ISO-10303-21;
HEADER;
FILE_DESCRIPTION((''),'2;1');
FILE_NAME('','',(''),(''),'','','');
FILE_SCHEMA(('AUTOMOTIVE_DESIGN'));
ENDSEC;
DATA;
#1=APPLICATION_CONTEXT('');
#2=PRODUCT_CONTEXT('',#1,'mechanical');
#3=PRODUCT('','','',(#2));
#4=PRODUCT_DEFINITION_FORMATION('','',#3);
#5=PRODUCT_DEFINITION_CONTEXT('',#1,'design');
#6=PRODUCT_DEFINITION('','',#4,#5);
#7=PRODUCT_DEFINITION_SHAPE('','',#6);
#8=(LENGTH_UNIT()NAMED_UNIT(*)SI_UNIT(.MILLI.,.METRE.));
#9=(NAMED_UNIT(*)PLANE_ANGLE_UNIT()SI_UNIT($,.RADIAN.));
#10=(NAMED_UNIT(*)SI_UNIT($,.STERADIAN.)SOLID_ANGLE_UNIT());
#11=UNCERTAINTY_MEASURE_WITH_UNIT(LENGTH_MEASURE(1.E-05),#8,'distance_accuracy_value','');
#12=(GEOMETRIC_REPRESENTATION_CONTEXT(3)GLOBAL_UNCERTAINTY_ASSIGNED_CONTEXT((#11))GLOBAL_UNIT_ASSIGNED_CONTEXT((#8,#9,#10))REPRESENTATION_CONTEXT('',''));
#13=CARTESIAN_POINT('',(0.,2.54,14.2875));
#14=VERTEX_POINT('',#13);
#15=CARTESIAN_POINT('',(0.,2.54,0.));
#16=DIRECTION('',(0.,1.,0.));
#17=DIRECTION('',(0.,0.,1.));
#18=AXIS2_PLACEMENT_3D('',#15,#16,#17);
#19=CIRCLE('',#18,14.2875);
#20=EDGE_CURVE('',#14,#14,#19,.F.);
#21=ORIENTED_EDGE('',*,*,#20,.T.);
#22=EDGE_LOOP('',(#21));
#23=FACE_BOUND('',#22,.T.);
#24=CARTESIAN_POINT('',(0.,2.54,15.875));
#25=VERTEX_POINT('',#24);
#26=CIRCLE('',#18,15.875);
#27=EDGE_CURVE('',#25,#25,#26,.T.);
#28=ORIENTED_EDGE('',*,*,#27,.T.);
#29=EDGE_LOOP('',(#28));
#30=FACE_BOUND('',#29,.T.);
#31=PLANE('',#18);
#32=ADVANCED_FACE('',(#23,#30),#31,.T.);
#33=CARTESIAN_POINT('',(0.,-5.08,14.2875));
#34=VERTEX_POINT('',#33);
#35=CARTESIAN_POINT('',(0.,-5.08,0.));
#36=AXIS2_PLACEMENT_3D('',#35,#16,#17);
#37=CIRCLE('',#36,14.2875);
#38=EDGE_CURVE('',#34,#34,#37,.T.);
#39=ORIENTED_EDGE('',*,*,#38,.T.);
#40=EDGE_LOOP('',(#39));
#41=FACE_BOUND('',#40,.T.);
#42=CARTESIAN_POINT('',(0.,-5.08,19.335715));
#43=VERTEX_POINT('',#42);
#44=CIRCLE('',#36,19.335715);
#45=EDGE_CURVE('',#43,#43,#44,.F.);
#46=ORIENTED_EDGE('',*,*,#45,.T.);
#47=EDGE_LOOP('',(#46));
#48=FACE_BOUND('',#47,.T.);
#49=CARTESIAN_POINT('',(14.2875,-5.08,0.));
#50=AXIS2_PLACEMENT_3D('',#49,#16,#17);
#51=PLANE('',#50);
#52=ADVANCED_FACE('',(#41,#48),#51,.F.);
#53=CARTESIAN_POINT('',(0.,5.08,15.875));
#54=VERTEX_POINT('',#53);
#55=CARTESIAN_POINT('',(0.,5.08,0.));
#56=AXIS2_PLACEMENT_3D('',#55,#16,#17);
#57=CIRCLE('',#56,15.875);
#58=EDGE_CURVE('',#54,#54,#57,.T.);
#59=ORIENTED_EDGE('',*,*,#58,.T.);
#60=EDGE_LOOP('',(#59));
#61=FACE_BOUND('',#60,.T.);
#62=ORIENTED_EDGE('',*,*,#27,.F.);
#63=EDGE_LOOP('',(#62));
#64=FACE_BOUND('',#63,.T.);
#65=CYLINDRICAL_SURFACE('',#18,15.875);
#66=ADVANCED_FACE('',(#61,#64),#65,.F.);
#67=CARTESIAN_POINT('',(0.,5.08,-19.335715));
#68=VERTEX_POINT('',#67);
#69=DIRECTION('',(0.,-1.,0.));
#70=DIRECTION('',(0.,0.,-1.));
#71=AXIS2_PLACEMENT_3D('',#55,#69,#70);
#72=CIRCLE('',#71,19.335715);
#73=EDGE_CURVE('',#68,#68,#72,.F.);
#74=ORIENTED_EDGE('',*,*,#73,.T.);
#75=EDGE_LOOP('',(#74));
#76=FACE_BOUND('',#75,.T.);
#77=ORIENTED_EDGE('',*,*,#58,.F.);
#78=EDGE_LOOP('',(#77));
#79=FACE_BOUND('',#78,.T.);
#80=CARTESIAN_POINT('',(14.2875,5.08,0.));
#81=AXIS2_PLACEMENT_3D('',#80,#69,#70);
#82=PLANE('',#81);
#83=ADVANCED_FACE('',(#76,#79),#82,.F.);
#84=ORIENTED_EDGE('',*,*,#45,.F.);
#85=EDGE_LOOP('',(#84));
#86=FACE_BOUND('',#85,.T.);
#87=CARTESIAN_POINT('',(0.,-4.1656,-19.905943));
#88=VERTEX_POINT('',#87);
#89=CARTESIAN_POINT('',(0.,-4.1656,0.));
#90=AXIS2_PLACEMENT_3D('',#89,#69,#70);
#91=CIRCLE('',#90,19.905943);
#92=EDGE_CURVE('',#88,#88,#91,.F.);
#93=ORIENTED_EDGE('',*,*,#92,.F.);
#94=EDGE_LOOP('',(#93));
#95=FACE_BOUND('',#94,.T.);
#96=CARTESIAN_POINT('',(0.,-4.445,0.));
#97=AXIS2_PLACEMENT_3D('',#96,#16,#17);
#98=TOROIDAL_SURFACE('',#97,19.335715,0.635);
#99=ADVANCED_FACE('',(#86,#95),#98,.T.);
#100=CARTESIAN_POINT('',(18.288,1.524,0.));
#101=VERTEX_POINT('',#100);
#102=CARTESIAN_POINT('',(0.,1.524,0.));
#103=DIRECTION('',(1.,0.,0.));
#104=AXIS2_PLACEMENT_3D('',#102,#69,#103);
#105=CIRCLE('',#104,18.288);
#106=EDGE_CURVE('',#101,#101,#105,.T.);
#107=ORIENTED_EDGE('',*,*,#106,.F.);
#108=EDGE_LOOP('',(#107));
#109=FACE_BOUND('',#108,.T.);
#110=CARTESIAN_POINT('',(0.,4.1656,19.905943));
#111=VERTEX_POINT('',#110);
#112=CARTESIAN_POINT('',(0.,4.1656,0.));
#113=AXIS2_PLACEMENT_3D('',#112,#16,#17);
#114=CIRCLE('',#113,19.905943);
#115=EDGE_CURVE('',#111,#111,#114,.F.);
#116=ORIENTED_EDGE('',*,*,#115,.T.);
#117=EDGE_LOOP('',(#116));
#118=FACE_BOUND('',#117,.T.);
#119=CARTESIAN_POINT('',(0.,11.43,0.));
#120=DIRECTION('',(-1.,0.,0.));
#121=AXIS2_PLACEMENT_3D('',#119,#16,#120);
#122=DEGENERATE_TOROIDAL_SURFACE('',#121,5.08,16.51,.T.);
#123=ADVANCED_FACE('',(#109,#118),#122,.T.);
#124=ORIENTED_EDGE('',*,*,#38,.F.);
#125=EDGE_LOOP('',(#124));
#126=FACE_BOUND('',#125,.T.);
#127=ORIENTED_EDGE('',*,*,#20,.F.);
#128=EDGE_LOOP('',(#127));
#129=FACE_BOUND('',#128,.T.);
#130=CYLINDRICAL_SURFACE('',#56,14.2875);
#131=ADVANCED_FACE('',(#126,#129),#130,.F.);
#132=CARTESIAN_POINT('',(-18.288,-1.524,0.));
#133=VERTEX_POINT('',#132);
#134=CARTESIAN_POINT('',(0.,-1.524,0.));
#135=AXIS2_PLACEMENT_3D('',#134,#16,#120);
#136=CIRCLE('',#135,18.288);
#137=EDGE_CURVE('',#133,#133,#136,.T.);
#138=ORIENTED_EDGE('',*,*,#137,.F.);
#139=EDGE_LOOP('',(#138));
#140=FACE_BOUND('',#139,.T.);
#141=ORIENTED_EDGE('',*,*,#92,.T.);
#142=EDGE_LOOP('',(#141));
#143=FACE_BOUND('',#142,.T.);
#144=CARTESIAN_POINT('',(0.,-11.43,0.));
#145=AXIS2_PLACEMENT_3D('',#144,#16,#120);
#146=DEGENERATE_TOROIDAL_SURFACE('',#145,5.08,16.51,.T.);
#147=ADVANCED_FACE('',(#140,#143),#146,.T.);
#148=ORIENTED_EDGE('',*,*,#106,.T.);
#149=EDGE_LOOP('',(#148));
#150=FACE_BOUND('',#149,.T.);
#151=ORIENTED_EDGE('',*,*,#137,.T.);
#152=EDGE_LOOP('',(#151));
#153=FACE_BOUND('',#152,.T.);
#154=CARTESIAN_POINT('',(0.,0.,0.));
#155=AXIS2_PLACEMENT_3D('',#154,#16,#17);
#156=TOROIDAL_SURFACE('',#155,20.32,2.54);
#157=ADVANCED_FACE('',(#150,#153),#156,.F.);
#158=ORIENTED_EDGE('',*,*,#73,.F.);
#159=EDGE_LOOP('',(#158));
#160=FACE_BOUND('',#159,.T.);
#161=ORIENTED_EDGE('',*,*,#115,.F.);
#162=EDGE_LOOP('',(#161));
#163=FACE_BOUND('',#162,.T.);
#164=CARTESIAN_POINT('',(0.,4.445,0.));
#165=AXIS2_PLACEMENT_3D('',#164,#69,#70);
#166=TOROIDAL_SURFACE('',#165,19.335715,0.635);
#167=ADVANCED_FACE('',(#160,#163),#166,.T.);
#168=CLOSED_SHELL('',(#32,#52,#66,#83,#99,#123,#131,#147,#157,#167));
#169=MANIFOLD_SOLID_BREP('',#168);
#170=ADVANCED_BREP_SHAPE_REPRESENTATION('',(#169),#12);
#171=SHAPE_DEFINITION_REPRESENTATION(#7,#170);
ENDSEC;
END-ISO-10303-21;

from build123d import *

# Parameters (mm, degrees)
FILLET1_R          = 16.51
FILLET2_R          = 0.635
SKETCH2_R          = 15.875
CUT_EXTRUDE1_DEPTH = 2.54


with BuildPart() as part:
    # Sketch1 → Revolve1 (revolve)
    with BuildSketch(Plane.XY, mode=Mode.PRIVATE) as revolve1_sk:
        with BuildLine():
            Line((14.2875, 5.08), (14.2875, -5.08))
            Line((14.2875, -5.08), (20.32, -5.08))
            Line((20.32, -5.08), (20.32, -2.54))
            ThreePointArc((20.32, -2.54), (17.78, 0), (20.32, 2.54))
            Line((20.32, 2.54), (20.32, 5.08))
            Line((20.32, 5.08), (14.2875, 5.08))
        make_face()
    revolve(revolve1_sk.sketch.rotate(Axis((0, 5.08, 0), (0, -1, 0)), 90), axis=Axis((0, 5.08, 0), (0, -1, 0)))

    # Fillet1
    # the kernel refuses this fillet: 16.51 mm, written as the material it takes off along each edge
    with BuildSketch(Plane(origin=(0, 2.54, 0), x_dir=(0, 0, 1), z_dir=(1, 0, 0))) as fillet1_piece_1:
        with BuildLine():
            CenterArc((5.08, -8.89), FILLET1_R, 22.619864948, 14.250032698)
            Line((18.288, 1.016), (18.55216, 1.21412))
            ThreePointArc((18.55216, 1.21412), (19.331747397, 0.563494793), (20.32, 0.3302))
            Line((20.32, 0.3302), (20.6502, 0))
            ThreePointArc((20.6502, 0), (20.6502, -1.27), (20.6248, -2.413))
            Line((20.6248, -2.413), (20.32, -2.54))
        make_face()
    revolve(axis=Axis((0, 2.54, 0), (0, -1, 0)), mode=Mode.SUBTRACT)
    with BuildSketch(Plane(origin=(0, -2.54, 0), x_dir=(0, 0, 1), z_dir=(1, 0, 0))) as fillet1_piece_2:
        with BuildLine():
            CenterArc((5.08, 8.89), FILLET1_R, 323.130102354, 14.250032698)
            Line((18.288, -1.016), (18.55216, -1.21412))
            ThreePointArc((18.55216, -1.21412), (19.331747397, -0.563494793), (20.32, -0.3302))
            Line((20.32, -0.3302), (20.6502, 0))
            ThreePointArc((20.6502, 0), (20.6502, 1.27), (20.6248, 2.413))
            Line((20.6248, 2.413), (20.32, 2.54))
        make_face()
    revolve(axis=Axis((0, -2.54, 0), (0, -1, 0)), mode=Mode.SUBTRACT)

    # Fillet2
    fillet2_edges = [part.edges().sort_by_distance(p)[0] for p in [
        (0, 5.08, -20.32),
        (0, -5.08, -20.32),
    ]]
    fillet(fillet2_edges, radius=FILLET2_R)

    # Sketch2 → Cut-Extrude1 (cut)
    with BuildSketch(Plane(origin=(0, 5.08, 0), x_dir=(1, 0, 0), z_dir=(0, 1, 0))):
        with Locations(Location((0, 0, 0), (0, 0, 270))):
            Circle(SKETCH2_R)
    extrude(amount=-CUT_EXTRUDE1_DEPTH, mode=Mode.SUBTRACT)


solid = part.part
